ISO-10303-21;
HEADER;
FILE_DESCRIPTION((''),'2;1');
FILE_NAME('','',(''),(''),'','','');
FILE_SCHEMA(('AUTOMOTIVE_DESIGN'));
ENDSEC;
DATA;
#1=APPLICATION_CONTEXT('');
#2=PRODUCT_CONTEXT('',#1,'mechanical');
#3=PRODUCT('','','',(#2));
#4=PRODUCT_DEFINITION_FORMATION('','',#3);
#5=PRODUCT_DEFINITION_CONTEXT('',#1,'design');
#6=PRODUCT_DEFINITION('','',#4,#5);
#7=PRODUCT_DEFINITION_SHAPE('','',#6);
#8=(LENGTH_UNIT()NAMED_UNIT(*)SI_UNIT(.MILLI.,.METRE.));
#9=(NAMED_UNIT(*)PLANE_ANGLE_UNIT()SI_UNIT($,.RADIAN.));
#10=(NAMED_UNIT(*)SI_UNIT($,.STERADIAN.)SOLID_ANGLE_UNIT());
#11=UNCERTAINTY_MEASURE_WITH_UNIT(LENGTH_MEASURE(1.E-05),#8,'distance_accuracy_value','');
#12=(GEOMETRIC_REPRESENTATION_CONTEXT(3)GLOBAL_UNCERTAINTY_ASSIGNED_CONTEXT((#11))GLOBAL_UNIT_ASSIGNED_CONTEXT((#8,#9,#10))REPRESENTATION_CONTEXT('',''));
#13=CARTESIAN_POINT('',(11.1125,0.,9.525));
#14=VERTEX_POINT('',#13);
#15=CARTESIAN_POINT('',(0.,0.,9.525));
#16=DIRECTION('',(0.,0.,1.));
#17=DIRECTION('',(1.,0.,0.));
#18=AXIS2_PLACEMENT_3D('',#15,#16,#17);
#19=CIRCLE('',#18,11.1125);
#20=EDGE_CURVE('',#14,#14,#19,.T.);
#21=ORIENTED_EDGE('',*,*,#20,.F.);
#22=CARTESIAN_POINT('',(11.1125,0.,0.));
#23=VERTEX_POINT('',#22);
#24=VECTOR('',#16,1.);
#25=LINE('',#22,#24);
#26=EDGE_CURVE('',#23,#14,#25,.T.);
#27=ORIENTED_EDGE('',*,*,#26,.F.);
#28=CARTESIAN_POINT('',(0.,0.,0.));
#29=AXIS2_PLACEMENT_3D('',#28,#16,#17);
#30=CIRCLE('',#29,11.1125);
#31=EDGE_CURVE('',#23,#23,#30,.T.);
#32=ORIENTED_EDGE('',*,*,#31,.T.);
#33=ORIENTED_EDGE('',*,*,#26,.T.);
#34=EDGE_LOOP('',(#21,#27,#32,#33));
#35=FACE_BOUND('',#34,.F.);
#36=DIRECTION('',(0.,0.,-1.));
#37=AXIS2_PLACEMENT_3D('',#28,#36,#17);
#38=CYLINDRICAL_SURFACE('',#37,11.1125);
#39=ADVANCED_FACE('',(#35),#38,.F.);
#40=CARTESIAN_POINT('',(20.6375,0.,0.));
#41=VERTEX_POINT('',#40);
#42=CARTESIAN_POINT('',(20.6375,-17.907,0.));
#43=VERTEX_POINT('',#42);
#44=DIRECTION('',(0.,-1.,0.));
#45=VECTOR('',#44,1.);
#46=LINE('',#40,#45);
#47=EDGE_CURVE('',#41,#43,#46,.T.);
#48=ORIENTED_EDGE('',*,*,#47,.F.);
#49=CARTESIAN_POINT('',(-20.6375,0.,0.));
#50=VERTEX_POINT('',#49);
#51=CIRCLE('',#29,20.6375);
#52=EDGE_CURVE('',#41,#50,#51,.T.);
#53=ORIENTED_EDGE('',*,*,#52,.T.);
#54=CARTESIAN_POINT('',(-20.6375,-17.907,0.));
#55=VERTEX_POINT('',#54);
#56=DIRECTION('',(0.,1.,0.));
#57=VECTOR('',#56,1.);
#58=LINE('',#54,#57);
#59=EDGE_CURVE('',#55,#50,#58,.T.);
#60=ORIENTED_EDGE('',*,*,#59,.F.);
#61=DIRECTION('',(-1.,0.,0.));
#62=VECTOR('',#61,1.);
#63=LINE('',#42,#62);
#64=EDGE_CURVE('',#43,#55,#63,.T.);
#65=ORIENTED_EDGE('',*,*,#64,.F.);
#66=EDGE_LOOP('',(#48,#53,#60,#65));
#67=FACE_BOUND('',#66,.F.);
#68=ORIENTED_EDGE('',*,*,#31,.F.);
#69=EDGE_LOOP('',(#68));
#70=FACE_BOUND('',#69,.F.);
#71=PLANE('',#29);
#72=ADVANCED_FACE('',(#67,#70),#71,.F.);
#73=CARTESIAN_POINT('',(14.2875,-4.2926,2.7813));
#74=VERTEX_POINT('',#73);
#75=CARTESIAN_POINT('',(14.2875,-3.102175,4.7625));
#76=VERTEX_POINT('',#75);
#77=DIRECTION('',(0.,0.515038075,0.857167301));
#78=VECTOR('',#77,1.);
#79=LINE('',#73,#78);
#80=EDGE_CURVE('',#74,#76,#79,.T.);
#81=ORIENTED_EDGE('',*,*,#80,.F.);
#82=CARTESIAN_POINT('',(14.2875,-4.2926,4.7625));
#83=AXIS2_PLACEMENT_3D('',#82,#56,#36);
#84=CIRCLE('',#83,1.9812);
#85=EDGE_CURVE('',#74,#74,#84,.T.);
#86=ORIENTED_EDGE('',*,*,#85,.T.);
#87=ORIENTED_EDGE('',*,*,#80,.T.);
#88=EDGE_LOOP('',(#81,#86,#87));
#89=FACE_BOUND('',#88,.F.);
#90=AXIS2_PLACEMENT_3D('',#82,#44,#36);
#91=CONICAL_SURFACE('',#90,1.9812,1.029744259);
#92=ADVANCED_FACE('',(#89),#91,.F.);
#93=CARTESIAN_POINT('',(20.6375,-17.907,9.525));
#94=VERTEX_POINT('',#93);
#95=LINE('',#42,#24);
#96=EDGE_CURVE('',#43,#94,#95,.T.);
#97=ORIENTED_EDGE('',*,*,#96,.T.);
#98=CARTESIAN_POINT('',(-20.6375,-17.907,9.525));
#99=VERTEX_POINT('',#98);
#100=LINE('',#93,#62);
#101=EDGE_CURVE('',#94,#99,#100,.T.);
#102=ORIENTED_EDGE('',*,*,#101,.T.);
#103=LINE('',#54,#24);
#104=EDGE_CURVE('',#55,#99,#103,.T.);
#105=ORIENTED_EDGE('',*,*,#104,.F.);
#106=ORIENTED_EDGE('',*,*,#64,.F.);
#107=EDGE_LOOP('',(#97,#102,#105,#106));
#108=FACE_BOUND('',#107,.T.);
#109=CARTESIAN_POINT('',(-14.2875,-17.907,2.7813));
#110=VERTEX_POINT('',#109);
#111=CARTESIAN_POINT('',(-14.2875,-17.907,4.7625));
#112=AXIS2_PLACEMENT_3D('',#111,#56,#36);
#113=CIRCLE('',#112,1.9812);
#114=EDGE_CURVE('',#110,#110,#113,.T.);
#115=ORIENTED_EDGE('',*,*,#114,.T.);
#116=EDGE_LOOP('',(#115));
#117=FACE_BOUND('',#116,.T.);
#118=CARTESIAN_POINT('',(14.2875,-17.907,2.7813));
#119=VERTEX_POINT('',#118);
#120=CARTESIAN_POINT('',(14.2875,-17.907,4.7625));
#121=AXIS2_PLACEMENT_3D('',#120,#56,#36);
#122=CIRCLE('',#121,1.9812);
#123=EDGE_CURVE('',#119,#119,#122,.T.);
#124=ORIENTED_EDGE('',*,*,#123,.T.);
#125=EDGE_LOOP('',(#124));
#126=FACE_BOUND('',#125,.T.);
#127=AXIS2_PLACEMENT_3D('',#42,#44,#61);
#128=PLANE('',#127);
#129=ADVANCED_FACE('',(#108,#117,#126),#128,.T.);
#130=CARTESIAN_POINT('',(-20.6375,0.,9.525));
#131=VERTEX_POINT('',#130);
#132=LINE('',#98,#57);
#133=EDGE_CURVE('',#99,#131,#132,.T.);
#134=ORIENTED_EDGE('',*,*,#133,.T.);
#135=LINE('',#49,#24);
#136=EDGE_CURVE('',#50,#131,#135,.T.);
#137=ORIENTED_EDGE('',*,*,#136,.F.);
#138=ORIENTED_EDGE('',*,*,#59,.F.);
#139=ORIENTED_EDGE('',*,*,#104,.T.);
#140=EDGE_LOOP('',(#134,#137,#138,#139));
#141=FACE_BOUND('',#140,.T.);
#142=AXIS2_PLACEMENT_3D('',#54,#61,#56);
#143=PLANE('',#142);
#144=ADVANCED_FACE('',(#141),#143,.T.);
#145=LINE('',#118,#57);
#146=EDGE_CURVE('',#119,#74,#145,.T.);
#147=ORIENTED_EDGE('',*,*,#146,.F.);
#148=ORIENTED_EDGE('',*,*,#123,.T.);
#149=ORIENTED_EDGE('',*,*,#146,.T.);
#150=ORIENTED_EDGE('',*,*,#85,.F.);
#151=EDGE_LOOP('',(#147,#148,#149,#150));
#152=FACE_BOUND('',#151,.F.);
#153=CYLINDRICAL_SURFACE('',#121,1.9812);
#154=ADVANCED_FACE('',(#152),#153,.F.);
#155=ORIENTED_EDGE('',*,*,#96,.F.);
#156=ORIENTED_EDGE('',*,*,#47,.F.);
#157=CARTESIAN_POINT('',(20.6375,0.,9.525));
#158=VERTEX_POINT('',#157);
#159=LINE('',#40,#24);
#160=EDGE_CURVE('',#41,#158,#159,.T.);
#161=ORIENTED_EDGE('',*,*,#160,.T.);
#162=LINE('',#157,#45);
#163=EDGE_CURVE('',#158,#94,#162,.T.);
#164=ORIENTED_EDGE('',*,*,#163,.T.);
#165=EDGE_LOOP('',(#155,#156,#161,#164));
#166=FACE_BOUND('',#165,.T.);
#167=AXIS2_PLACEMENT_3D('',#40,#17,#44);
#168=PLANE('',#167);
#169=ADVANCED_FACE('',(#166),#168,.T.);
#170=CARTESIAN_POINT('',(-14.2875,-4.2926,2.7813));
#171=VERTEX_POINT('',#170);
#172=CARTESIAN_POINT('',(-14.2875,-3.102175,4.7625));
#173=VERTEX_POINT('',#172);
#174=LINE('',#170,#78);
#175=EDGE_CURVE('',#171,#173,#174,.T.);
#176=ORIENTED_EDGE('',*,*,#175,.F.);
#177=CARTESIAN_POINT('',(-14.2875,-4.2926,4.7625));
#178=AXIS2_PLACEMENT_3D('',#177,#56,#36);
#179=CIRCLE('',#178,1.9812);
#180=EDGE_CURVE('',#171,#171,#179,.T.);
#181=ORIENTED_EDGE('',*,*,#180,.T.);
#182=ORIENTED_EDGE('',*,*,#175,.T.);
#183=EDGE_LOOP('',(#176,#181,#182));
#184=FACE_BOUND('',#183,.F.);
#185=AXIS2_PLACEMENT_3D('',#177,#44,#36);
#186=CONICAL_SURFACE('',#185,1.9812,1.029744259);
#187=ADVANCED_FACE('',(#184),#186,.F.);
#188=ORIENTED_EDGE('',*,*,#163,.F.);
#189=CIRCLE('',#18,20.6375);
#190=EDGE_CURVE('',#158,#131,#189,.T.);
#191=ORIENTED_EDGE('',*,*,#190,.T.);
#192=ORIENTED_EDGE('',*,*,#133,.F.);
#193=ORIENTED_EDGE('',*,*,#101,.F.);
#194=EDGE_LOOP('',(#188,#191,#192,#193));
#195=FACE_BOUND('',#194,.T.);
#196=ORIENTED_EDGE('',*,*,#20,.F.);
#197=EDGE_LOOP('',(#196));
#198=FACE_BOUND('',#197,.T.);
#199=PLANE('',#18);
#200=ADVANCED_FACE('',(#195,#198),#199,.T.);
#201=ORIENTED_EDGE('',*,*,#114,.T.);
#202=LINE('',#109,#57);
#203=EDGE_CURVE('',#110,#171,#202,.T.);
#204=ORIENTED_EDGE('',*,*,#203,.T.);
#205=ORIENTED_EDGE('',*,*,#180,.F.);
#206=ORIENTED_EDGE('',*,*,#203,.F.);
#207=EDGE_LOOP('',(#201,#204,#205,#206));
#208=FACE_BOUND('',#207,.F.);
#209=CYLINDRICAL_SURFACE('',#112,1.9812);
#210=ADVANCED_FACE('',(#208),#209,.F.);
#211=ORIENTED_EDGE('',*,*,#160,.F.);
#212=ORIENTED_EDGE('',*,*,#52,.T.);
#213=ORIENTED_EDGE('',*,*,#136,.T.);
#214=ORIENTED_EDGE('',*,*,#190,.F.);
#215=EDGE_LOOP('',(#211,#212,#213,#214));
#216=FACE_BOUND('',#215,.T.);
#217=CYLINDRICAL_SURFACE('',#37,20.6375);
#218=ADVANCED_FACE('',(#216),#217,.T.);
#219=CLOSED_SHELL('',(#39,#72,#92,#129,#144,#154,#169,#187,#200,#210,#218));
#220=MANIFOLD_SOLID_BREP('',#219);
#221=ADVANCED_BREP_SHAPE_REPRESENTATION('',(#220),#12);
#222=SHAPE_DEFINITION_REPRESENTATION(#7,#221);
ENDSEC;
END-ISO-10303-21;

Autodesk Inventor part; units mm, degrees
ref_plane "YZ Plane" through (0, 0, 0) normal (1, 0, 0) x (0, 1, 0)
ref_plane "XZ Plane" through (0, 0, 0) normal (0, 1, 0) x (-1, 0, 0)
ref_plane "XY Plane" through (0, 0, 0) normal (0, 0, 1) x (1, 0, 0)
sketch "Sketch1" plane through (0, 0, 0) normal (0, 0, 1) x (1, 0, 0)
  circle A0 centre (0, 0) radius 11.1125
  arc A1 (20.6375, 0) -> (-20.6375, 0) centre (0, 0) ccw
  line L0 (20.6375, 0) -> (20.6375, -17.907)
  line L1 (20.6375, -17.907) -> (-20.6375, -17.907)
  line L2 (-20.6375, -17.907) -> (-20.6375, 0)
  dimension "d0" = 22.225
  dimension "d2" = 9.525
  dimension "d3" = 17.907
extrude "Extrusion1" add sketch "Sketch1" along normal blind 9.525
sketch "Sketch2" plane through (-20.6375, -17.907, 0) normal (0, -1, 0) x (1, 0, 0)
  circle A0 centre (6.35, 4.7625) radius 2.8195
  circle A1 centre (34.925, 4.7625) radius 2.8195
  line L0 (0, 0) -> (0, 9.525) projected
  line L1 (41.275, 0) -> (41.275, 9.525) projected
  point P0 (20.6375, 0)
  point P1 (0, 4.7625)
  point P2 (41.275, 4.7625)
  dimension "d6" = 5.639
  dimension "d7" = 6.35
  dimension "d8" = 6.35
hole "Hole1" at (-14.2875, -17.907, 4.7625) at (14.2875, -17.907, 4.7625) direction (0, 1, 0) diameter 3.9624 depth 13.6144 tip angle 118 thread size "10-32 UNF" class "2B" standard "ANSI Unified Screw Threads"
properties part number "3DPRINT,VERTICAL,ROLLER,TOP,BEARING,BLOCK"
